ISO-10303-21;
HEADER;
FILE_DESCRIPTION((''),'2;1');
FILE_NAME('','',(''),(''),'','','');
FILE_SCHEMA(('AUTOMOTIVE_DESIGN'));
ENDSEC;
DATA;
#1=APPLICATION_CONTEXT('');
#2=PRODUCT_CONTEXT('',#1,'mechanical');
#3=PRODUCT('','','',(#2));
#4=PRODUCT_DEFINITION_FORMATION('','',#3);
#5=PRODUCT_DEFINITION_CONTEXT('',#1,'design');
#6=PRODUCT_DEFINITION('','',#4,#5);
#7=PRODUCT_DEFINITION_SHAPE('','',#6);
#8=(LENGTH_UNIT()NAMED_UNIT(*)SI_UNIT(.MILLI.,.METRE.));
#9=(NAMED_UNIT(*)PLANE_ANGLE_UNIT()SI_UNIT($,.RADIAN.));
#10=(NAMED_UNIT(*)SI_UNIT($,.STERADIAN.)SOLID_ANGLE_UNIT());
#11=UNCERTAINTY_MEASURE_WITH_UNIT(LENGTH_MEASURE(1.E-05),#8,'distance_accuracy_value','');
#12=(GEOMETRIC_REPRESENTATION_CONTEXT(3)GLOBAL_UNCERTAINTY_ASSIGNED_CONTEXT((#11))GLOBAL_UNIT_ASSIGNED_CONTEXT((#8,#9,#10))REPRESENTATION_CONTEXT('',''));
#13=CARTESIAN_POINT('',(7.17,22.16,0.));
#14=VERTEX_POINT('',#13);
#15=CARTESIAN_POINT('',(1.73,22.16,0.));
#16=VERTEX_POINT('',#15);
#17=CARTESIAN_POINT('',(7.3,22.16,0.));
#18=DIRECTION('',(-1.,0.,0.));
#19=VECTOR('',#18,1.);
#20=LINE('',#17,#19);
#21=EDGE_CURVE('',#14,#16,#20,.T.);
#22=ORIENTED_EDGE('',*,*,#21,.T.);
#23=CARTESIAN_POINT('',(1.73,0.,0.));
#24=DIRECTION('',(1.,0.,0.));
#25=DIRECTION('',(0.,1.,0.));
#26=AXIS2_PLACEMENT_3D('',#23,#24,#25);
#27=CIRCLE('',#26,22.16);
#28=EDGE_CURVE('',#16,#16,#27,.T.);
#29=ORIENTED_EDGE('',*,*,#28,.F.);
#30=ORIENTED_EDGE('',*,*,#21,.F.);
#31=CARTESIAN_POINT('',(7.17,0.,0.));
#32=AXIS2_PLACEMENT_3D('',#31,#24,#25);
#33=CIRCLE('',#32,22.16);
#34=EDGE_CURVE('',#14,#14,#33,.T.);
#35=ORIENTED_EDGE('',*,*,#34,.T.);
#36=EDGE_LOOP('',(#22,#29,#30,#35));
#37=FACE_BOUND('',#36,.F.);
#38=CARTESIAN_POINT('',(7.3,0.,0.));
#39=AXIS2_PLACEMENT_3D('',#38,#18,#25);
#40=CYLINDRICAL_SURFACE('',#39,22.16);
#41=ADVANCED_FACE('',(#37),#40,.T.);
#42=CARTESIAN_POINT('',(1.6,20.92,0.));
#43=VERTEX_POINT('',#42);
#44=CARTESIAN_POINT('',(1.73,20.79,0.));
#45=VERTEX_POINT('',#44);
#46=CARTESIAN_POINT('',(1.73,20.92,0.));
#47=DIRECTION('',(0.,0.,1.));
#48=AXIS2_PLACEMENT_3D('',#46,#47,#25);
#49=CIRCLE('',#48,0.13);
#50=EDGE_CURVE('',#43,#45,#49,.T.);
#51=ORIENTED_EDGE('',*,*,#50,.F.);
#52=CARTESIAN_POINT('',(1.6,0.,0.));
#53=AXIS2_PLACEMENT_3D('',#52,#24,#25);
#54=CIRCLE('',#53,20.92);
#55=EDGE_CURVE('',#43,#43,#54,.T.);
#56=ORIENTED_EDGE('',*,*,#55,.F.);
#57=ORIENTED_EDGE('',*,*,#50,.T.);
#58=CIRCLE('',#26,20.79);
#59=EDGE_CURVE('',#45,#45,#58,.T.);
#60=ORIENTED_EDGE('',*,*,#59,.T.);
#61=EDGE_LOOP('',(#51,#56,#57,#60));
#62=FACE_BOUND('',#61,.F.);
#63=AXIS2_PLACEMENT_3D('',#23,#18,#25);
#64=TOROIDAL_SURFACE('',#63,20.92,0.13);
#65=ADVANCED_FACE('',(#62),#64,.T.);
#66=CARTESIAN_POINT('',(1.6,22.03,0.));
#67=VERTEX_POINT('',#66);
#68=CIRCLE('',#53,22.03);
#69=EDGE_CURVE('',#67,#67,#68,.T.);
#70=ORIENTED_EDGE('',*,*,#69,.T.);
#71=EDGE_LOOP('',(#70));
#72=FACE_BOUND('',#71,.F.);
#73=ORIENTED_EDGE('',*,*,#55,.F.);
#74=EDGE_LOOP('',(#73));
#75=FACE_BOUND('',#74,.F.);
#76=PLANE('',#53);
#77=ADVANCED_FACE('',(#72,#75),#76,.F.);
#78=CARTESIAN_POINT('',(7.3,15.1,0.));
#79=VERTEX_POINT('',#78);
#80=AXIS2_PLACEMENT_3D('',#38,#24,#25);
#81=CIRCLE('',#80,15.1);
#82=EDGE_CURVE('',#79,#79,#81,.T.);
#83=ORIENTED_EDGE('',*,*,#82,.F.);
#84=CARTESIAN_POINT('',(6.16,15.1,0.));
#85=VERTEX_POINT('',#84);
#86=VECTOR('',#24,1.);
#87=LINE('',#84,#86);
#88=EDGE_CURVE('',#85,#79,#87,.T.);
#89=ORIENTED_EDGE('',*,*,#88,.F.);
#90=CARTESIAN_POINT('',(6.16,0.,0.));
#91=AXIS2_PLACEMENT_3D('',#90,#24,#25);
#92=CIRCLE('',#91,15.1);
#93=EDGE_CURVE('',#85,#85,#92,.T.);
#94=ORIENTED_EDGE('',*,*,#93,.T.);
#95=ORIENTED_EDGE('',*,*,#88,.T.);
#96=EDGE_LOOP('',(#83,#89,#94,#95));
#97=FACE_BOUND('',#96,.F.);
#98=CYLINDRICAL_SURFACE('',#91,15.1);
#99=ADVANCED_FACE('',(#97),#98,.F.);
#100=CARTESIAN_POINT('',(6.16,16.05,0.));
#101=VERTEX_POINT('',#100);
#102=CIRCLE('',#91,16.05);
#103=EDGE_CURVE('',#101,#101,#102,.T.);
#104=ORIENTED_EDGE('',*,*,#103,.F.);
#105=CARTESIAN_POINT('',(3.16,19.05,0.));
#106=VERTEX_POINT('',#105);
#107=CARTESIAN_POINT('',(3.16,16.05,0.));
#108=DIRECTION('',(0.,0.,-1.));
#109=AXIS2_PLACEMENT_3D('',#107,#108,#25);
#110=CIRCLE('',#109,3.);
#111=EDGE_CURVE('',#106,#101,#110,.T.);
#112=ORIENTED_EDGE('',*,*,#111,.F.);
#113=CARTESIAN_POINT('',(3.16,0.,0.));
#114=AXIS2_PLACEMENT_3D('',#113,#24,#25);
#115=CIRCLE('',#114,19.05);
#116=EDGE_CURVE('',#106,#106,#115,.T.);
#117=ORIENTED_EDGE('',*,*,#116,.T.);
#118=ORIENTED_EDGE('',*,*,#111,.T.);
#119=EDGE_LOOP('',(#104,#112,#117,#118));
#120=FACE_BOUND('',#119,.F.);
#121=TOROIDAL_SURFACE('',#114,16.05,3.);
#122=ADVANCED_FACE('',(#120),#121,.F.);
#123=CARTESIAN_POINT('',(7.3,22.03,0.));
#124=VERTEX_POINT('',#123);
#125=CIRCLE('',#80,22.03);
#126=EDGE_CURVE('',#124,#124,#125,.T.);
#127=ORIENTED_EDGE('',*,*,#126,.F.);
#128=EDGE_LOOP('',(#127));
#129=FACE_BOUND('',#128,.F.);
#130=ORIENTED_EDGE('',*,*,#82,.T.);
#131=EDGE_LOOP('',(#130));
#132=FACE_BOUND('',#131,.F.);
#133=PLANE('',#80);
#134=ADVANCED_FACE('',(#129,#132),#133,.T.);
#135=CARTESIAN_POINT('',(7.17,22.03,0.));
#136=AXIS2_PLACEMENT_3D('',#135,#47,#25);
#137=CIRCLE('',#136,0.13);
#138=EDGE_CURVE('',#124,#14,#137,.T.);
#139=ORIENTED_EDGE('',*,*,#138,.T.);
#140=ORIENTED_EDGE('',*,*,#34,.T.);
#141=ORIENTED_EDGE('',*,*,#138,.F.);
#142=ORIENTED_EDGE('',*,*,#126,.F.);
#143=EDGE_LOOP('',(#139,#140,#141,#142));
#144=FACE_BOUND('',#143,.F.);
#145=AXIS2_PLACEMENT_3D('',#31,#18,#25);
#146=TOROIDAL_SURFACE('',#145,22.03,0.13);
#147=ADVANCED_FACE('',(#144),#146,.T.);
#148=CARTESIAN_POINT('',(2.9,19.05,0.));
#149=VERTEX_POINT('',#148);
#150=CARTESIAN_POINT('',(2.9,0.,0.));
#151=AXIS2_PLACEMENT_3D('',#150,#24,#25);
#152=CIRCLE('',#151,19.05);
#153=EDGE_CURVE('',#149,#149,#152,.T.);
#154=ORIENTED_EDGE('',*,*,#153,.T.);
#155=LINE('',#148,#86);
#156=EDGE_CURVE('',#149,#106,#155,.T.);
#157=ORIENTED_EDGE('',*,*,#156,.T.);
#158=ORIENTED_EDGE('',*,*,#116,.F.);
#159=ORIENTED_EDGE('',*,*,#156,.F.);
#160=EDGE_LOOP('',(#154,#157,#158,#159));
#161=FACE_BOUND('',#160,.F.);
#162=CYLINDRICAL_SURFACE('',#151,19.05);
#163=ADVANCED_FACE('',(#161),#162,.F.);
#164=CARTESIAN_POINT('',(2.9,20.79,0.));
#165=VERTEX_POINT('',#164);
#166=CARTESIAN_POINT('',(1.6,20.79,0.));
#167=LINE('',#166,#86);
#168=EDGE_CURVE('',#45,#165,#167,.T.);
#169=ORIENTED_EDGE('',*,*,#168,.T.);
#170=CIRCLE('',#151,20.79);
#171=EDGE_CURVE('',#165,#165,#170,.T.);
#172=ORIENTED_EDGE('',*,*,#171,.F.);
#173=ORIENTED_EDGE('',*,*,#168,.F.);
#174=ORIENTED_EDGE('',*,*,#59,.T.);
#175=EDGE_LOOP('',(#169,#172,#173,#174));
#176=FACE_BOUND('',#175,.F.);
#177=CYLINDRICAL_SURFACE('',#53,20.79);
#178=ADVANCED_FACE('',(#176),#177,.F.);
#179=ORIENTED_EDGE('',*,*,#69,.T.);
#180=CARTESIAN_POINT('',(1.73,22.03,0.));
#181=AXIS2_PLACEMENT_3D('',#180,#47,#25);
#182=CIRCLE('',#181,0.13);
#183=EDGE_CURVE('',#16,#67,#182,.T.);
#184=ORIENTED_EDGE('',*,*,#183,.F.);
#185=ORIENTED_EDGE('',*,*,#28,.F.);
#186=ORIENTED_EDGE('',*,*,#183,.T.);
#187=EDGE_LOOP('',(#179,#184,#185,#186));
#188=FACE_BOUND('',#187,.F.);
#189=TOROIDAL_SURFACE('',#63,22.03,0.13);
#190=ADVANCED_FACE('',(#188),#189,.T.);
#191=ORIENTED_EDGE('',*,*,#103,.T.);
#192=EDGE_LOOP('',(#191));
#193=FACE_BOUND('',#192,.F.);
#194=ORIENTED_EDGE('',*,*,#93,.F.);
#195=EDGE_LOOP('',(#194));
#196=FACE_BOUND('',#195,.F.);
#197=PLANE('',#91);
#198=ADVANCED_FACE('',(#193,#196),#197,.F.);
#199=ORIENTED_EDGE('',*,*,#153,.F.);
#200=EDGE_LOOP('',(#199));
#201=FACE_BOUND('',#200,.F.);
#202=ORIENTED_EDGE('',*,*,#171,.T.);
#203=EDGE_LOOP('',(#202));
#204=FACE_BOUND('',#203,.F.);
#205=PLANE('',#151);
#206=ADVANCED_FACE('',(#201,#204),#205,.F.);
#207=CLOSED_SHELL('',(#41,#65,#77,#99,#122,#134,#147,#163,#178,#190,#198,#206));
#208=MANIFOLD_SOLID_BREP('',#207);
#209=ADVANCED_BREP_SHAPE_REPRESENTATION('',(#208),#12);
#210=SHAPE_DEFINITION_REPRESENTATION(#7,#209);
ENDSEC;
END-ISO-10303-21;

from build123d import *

# Parameters (mm, degrees)
F2_R = 0.13


# Not quite as in the source:
# - a feature names something its author has since deleted; it is built from what else it names


with BuildPart() as f1:
    # F0 (on Top) → F1 (revolve)
    with BuildSketch(Plane.XY):
        with BuildLine():
            Line((7.3, 15.1), (7.3, 22.16))
            Line((7.3, 22.16), (1.6, 22.16))
            Line((1.6, 22.16), (1.6, 20.79))
            Line((1.6, 20.79), (2.9, 20.79))
            Line((2.9, 20.79), (2.9, 19.05))
            Line((2.9, 19.05), (3.16, 19.05))
            ThreePointArc((3.16, 19.05), (5.2813203436, 18.1713203436), (6.16, 16.05))
            Line((6.16, 16.05), (6.16, 15.1))
            Line((6.16, 15.1), (7.3, 15.1))
        make_face()
    revolve(axis=Axis((7.0380799007, 0, 0), (1, 0, 0)))

    # F2
    f2_edges = [f1.edges().sort_by_distance(p)[0] for p in [
        (7.3, -22.16, 0),
        (1.6, -22.16, 0),
        (1.6, -20.79, 0),
    ]]
    fillet(f2_edges, radius=F2_R)


solid = f1.part
